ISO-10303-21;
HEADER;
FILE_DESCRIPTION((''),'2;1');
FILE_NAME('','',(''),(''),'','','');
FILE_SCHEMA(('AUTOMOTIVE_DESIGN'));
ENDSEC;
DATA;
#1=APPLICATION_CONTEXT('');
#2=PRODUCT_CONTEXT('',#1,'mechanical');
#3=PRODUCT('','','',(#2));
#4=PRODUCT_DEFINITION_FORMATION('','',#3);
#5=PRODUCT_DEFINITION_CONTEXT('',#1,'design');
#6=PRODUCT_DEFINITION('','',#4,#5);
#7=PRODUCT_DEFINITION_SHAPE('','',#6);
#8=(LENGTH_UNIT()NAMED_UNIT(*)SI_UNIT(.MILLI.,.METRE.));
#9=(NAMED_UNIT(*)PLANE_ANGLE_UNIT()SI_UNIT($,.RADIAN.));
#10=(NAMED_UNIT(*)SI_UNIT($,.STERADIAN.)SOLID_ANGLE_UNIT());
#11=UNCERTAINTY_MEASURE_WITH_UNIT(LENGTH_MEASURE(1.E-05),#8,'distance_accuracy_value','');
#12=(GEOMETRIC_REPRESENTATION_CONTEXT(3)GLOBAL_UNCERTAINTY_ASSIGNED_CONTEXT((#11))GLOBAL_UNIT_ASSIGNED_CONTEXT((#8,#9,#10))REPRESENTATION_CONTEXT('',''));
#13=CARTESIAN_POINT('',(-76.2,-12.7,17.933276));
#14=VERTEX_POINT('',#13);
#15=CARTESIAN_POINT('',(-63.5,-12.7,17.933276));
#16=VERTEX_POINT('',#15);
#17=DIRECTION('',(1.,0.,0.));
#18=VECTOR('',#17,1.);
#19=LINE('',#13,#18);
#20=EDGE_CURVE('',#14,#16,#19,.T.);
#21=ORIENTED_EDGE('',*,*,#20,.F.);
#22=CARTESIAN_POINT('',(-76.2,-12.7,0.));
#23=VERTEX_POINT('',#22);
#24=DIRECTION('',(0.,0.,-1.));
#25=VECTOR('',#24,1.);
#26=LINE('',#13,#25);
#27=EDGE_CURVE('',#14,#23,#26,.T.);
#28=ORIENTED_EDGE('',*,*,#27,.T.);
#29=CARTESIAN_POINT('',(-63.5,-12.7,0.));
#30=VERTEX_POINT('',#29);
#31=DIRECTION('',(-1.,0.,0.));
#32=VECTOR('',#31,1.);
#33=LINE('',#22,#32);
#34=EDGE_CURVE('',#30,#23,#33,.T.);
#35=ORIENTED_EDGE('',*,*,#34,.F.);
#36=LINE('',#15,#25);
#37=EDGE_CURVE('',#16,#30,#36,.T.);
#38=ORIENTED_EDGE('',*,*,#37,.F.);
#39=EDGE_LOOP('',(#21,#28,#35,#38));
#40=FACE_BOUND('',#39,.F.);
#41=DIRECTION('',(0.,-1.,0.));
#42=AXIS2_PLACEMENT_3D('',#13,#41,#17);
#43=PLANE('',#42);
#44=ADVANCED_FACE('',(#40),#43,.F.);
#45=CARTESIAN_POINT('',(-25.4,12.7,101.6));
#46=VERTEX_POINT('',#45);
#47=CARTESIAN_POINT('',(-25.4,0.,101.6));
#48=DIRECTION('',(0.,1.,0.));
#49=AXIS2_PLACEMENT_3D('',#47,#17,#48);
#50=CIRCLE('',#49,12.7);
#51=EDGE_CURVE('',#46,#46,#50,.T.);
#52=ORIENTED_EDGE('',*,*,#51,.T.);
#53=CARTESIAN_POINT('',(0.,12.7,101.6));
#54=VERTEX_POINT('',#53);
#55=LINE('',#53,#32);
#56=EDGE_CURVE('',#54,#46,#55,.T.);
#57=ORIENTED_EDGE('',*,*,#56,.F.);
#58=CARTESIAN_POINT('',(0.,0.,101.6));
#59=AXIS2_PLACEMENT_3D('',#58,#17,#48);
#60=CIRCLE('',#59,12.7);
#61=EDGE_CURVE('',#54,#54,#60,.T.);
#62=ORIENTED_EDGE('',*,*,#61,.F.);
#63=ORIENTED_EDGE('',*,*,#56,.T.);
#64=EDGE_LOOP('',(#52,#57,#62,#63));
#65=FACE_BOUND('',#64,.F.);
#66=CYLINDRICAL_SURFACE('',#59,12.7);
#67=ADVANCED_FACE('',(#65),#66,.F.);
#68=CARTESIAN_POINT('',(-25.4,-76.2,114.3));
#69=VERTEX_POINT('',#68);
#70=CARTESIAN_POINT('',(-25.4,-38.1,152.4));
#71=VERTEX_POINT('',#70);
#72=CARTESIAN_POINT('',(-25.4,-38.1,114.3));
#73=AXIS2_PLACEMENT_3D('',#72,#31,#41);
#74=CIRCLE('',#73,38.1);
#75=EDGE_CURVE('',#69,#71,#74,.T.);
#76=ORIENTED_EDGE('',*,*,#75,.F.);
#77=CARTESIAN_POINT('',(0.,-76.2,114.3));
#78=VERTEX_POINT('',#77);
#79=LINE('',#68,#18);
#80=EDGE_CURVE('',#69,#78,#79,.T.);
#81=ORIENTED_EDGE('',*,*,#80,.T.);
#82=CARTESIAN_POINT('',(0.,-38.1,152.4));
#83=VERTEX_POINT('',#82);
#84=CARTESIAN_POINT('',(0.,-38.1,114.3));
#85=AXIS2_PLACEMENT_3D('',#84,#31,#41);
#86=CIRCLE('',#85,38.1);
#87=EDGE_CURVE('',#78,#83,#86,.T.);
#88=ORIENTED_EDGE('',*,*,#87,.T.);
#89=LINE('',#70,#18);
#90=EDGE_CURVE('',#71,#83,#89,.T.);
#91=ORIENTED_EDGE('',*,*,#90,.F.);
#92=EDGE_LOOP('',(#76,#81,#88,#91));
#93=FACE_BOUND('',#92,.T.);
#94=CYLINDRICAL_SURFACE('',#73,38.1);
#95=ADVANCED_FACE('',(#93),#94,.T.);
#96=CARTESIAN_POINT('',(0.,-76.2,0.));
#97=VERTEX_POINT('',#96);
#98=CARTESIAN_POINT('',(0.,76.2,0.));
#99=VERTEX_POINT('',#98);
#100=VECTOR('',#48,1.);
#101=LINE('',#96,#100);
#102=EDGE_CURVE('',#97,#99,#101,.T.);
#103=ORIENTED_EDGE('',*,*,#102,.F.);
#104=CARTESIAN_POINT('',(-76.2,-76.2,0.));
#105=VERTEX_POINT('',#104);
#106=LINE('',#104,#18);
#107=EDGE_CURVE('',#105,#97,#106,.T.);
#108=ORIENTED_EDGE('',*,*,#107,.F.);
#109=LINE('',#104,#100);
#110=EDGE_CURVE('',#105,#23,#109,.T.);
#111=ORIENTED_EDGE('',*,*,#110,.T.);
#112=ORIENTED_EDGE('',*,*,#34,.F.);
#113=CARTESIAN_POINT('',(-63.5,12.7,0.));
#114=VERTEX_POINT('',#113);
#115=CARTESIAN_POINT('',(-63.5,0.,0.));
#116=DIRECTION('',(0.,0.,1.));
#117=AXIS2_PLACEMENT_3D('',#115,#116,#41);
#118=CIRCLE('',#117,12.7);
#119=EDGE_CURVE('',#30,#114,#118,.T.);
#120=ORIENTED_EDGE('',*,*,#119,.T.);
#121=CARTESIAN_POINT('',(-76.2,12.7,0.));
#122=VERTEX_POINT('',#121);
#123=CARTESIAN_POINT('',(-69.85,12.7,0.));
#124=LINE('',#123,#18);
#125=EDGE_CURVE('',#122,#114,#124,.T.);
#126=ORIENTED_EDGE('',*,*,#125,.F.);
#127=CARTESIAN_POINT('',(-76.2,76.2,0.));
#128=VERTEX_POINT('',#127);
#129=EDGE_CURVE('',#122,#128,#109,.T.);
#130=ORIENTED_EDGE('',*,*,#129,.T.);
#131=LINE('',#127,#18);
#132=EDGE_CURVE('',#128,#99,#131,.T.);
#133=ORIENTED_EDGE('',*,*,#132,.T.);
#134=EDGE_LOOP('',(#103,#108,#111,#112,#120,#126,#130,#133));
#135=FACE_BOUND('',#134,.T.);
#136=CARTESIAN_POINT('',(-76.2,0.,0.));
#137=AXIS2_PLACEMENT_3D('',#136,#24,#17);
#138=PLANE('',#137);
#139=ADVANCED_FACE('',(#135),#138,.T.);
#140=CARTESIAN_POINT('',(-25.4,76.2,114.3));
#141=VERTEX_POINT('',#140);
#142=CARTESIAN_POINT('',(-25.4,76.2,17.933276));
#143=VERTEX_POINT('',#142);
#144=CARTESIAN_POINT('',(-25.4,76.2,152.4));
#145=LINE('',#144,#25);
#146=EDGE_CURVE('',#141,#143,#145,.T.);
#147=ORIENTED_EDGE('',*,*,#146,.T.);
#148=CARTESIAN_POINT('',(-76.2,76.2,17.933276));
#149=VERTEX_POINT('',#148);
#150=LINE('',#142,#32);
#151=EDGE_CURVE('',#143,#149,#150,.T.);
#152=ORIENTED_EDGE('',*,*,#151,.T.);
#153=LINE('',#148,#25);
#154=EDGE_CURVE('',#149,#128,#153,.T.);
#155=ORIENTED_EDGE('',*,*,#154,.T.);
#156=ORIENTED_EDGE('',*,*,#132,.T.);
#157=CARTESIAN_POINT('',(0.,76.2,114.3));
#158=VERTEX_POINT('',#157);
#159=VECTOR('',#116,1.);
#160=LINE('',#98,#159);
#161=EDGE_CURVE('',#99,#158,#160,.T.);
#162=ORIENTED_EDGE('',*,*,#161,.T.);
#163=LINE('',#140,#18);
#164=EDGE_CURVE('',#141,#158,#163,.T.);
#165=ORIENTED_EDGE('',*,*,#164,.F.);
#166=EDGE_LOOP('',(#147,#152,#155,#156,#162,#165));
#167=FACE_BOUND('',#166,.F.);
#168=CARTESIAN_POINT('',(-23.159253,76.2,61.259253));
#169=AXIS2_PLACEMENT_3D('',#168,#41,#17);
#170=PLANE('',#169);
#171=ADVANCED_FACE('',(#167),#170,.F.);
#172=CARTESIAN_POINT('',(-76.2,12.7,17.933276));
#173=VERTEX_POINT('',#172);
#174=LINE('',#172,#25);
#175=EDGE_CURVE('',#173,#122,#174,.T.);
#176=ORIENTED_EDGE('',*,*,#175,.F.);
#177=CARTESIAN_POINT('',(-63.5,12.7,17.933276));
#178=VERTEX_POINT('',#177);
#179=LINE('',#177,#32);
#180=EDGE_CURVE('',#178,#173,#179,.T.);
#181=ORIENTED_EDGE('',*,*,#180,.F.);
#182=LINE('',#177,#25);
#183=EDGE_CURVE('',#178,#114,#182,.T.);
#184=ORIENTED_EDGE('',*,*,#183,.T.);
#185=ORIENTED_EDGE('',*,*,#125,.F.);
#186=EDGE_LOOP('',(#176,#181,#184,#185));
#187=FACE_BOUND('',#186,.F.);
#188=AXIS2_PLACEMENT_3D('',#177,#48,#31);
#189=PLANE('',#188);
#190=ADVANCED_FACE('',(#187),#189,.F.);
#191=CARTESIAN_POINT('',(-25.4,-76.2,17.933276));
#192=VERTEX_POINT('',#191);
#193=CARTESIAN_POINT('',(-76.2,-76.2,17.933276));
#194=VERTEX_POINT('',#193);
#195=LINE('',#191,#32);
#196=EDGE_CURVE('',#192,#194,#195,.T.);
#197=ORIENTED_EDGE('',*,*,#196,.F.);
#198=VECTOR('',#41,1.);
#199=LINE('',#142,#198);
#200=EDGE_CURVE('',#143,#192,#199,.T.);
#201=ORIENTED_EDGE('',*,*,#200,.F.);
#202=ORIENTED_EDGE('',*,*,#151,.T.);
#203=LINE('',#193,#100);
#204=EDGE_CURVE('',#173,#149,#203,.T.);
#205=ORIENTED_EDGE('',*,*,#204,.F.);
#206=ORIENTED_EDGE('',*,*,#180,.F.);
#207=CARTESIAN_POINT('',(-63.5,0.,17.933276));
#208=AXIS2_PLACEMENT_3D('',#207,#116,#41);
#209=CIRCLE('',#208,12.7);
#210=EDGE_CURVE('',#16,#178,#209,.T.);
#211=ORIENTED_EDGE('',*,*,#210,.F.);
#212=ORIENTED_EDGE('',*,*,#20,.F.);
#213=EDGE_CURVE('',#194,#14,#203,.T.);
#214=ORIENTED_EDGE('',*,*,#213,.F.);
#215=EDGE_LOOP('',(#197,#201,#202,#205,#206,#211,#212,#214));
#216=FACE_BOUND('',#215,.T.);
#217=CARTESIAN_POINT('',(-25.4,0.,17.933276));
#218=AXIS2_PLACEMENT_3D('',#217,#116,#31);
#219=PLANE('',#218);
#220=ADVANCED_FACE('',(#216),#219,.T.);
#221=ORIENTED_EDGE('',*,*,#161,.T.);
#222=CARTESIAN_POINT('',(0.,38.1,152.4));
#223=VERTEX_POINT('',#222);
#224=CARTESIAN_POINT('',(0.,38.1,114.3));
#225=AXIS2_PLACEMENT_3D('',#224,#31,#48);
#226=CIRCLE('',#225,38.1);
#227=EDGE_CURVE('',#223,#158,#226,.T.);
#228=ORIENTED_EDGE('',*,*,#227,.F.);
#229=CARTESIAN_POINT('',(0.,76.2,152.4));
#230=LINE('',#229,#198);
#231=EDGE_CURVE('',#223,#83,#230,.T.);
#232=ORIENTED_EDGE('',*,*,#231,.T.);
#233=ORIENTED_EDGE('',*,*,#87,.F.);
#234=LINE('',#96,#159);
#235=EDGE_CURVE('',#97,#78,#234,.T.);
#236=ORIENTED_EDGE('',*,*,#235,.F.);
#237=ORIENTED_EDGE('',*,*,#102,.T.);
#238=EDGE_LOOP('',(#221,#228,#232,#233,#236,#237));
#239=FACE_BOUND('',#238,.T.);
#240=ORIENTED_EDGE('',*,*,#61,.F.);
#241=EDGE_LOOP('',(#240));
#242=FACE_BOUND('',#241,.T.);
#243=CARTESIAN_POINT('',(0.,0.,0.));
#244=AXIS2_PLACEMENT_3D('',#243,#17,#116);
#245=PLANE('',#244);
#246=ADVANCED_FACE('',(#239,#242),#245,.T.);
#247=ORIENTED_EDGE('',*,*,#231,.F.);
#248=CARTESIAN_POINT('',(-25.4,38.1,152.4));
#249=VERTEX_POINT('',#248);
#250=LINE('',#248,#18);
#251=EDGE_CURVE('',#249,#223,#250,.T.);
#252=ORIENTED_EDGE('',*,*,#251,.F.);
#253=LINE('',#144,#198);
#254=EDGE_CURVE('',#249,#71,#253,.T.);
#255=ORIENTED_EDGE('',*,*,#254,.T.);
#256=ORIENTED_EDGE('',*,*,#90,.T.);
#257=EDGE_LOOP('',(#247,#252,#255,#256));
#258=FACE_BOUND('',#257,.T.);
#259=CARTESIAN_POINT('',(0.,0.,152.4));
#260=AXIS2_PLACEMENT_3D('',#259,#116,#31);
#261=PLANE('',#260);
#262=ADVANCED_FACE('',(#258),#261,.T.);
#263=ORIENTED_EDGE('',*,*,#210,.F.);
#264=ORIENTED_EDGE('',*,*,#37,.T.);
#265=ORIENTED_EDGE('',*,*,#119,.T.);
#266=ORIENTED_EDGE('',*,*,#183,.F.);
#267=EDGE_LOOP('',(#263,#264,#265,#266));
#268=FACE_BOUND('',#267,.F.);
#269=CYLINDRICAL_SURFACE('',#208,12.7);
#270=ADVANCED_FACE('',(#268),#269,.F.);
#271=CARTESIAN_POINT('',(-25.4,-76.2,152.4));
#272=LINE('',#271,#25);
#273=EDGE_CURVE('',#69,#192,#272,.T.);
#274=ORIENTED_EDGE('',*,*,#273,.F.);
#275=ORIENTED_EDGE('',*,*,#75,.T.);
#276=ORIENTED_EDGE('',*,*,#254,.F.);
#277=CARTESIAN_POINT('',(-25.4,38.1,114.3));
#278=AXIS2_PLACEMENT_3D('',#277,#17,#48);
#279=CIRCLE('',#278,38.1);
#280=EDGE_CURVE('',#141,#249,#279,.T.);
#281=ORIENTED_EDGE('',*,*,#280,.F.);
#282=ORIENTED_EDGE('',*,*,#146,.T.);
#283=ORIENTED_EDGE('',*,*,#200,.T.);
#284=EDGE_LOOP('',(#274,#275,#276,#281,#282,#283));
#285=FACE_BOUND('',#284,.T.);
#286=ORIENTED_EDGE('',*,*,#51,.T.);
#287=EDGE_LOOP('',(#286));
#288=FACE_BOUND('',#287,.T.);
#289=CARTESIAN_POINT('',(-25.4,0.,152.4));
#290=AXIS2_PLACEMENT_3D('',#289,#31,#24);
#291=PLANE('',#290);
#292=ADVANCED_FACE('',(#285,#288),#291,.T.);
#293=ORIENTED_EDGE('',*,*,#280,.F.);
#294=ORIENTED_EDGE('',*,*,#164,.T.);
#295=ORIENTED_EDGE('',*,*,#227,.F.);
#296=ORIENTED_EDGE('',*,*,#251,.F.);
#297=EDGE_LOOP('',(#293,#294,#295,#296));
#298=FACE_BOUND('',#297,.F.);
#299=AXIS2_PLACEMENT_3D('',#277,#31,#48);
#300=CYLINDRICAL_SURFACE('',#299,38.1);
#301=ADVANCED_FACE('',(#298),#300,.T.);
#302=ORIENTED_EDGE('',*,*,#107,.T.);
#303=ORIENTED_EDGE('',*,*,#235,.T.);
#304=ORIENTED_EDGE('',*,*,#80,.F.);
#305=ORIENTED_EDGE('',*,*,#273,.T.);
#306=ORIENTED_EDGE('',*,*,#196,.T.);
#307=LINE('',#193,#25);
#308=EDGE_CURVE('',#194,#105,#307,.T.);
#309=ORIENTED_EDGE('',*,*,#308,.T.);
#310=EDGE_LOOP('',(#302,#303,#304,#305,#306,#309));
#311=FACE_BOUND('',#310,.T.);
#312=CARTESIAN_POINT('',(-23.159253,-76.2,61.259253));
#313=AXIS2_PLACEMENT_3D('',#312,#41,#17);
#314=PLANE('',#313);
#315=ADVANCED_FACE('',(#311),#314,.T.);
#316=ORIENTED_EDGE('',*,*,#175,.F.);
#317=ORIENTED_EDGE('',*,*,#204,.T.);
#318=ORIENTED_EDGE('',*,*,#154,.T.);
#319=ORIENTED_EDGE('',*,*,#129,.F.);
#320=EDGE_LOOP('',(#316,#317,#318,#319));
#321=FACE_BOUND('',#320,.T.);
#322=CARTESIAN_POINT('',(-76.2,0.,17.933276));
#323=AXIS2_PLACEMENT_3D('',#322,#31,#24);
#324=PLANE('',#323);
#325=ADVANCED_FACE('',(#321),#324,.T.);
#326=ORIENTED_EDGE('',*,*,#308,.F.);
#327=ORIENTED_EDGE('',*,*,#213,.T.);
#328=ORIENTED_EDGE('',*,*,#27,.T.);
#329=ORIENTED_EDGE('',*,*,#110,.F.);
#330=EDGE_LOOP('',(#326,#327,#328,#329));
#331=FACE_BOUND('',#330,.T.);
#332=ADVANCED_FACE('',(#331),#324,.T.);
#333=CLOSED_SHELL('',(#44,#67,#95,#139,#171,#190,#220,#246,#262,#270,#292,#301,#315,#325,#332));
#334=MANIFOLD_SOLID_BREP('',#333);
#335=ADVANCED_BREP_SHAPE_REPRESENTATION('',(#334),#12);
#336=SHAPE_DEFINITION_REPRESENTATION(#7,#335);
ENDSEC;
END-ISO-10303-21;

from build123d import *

# Parameters (mm, degrees)
F1_DEPTH = 76.2
F2_R     = 12.7
F3_DEPTH = 76.201
F5_DEPTH = 17.9342755506
F7_DEPTH = 25.401


# Not quite as in the source:
# - a pattern or mirror of a feature is missing from the dataset's text; its kind, count and spacing are read off the source's solid


with BuildPart() as f1:
    # F0 (on Front) → F1 (new body, symmetric)
    with BuildSketch(Plane.XZ):
        Polygon((0, 0), (0, 152.4), (-25.4, 152.4), (-25.4, 17.9332755506), (-76.2, 17.9332755506), (-76.2, 0), align=None)
    extrude(amount=F1_DEPTH, both=True)

    # F2 (on face) → F3 (cut, through all)
    with BuildSketch(Plane.YZ):
        with Locations((0, 101.6)):
            Circle(F2_R)
    extrude(amount=-F3_DEPTH, mode=Mode.SUBTRACT)

    # F4 (on face) → F5 (cut, through all)
    with BuildSketch(Plane.XY.offset(17.9332755506)):
        with BuildLine():
            Line((-63.5, 12.7), (-76.2, 12.7))
            Line((-76.2, 12.7), (-76.2, -12.7))
            Line((-76.2, -12.7), (-63.5, -12.7))
            ThreePointArc((-63.5, -12.7), (-50.8, 0), (-63.5, 12.7))
        make_face()
    extrude(amount=-F5_DEPTH, mode=Mode.SUBTRACT)

    # F6 (on face) → F7 (cut, through all)
    with BuildSketch(Plane(origin=(-25.4, 0, 0), x_dir=(0, -1, 0), z_dir=(-1, 0, 0))):
        with BuildLine():
            ThreePointArc((-76.2, 114.3), (-65.0407683632, 141.2407683632), (-38.1, 152.4))
            Line((-38.1, 152.4), (-76.2, 152.4))
            Line((-76.2, 152.4), (-76.2, 114.3))
        make_face()
    f7 = extrude(amount=-F7_DEPTH, mode=Mode.SUBTRACT)

    # F7_copies: F7 across plane
    add(f7.mirror(Plane(origin=(0, 0, 0), x_dir=(0, 0, -1), z_dir=(0, -1, 0))), mode=Mode.SUBTRACT)


solid = f1.part
